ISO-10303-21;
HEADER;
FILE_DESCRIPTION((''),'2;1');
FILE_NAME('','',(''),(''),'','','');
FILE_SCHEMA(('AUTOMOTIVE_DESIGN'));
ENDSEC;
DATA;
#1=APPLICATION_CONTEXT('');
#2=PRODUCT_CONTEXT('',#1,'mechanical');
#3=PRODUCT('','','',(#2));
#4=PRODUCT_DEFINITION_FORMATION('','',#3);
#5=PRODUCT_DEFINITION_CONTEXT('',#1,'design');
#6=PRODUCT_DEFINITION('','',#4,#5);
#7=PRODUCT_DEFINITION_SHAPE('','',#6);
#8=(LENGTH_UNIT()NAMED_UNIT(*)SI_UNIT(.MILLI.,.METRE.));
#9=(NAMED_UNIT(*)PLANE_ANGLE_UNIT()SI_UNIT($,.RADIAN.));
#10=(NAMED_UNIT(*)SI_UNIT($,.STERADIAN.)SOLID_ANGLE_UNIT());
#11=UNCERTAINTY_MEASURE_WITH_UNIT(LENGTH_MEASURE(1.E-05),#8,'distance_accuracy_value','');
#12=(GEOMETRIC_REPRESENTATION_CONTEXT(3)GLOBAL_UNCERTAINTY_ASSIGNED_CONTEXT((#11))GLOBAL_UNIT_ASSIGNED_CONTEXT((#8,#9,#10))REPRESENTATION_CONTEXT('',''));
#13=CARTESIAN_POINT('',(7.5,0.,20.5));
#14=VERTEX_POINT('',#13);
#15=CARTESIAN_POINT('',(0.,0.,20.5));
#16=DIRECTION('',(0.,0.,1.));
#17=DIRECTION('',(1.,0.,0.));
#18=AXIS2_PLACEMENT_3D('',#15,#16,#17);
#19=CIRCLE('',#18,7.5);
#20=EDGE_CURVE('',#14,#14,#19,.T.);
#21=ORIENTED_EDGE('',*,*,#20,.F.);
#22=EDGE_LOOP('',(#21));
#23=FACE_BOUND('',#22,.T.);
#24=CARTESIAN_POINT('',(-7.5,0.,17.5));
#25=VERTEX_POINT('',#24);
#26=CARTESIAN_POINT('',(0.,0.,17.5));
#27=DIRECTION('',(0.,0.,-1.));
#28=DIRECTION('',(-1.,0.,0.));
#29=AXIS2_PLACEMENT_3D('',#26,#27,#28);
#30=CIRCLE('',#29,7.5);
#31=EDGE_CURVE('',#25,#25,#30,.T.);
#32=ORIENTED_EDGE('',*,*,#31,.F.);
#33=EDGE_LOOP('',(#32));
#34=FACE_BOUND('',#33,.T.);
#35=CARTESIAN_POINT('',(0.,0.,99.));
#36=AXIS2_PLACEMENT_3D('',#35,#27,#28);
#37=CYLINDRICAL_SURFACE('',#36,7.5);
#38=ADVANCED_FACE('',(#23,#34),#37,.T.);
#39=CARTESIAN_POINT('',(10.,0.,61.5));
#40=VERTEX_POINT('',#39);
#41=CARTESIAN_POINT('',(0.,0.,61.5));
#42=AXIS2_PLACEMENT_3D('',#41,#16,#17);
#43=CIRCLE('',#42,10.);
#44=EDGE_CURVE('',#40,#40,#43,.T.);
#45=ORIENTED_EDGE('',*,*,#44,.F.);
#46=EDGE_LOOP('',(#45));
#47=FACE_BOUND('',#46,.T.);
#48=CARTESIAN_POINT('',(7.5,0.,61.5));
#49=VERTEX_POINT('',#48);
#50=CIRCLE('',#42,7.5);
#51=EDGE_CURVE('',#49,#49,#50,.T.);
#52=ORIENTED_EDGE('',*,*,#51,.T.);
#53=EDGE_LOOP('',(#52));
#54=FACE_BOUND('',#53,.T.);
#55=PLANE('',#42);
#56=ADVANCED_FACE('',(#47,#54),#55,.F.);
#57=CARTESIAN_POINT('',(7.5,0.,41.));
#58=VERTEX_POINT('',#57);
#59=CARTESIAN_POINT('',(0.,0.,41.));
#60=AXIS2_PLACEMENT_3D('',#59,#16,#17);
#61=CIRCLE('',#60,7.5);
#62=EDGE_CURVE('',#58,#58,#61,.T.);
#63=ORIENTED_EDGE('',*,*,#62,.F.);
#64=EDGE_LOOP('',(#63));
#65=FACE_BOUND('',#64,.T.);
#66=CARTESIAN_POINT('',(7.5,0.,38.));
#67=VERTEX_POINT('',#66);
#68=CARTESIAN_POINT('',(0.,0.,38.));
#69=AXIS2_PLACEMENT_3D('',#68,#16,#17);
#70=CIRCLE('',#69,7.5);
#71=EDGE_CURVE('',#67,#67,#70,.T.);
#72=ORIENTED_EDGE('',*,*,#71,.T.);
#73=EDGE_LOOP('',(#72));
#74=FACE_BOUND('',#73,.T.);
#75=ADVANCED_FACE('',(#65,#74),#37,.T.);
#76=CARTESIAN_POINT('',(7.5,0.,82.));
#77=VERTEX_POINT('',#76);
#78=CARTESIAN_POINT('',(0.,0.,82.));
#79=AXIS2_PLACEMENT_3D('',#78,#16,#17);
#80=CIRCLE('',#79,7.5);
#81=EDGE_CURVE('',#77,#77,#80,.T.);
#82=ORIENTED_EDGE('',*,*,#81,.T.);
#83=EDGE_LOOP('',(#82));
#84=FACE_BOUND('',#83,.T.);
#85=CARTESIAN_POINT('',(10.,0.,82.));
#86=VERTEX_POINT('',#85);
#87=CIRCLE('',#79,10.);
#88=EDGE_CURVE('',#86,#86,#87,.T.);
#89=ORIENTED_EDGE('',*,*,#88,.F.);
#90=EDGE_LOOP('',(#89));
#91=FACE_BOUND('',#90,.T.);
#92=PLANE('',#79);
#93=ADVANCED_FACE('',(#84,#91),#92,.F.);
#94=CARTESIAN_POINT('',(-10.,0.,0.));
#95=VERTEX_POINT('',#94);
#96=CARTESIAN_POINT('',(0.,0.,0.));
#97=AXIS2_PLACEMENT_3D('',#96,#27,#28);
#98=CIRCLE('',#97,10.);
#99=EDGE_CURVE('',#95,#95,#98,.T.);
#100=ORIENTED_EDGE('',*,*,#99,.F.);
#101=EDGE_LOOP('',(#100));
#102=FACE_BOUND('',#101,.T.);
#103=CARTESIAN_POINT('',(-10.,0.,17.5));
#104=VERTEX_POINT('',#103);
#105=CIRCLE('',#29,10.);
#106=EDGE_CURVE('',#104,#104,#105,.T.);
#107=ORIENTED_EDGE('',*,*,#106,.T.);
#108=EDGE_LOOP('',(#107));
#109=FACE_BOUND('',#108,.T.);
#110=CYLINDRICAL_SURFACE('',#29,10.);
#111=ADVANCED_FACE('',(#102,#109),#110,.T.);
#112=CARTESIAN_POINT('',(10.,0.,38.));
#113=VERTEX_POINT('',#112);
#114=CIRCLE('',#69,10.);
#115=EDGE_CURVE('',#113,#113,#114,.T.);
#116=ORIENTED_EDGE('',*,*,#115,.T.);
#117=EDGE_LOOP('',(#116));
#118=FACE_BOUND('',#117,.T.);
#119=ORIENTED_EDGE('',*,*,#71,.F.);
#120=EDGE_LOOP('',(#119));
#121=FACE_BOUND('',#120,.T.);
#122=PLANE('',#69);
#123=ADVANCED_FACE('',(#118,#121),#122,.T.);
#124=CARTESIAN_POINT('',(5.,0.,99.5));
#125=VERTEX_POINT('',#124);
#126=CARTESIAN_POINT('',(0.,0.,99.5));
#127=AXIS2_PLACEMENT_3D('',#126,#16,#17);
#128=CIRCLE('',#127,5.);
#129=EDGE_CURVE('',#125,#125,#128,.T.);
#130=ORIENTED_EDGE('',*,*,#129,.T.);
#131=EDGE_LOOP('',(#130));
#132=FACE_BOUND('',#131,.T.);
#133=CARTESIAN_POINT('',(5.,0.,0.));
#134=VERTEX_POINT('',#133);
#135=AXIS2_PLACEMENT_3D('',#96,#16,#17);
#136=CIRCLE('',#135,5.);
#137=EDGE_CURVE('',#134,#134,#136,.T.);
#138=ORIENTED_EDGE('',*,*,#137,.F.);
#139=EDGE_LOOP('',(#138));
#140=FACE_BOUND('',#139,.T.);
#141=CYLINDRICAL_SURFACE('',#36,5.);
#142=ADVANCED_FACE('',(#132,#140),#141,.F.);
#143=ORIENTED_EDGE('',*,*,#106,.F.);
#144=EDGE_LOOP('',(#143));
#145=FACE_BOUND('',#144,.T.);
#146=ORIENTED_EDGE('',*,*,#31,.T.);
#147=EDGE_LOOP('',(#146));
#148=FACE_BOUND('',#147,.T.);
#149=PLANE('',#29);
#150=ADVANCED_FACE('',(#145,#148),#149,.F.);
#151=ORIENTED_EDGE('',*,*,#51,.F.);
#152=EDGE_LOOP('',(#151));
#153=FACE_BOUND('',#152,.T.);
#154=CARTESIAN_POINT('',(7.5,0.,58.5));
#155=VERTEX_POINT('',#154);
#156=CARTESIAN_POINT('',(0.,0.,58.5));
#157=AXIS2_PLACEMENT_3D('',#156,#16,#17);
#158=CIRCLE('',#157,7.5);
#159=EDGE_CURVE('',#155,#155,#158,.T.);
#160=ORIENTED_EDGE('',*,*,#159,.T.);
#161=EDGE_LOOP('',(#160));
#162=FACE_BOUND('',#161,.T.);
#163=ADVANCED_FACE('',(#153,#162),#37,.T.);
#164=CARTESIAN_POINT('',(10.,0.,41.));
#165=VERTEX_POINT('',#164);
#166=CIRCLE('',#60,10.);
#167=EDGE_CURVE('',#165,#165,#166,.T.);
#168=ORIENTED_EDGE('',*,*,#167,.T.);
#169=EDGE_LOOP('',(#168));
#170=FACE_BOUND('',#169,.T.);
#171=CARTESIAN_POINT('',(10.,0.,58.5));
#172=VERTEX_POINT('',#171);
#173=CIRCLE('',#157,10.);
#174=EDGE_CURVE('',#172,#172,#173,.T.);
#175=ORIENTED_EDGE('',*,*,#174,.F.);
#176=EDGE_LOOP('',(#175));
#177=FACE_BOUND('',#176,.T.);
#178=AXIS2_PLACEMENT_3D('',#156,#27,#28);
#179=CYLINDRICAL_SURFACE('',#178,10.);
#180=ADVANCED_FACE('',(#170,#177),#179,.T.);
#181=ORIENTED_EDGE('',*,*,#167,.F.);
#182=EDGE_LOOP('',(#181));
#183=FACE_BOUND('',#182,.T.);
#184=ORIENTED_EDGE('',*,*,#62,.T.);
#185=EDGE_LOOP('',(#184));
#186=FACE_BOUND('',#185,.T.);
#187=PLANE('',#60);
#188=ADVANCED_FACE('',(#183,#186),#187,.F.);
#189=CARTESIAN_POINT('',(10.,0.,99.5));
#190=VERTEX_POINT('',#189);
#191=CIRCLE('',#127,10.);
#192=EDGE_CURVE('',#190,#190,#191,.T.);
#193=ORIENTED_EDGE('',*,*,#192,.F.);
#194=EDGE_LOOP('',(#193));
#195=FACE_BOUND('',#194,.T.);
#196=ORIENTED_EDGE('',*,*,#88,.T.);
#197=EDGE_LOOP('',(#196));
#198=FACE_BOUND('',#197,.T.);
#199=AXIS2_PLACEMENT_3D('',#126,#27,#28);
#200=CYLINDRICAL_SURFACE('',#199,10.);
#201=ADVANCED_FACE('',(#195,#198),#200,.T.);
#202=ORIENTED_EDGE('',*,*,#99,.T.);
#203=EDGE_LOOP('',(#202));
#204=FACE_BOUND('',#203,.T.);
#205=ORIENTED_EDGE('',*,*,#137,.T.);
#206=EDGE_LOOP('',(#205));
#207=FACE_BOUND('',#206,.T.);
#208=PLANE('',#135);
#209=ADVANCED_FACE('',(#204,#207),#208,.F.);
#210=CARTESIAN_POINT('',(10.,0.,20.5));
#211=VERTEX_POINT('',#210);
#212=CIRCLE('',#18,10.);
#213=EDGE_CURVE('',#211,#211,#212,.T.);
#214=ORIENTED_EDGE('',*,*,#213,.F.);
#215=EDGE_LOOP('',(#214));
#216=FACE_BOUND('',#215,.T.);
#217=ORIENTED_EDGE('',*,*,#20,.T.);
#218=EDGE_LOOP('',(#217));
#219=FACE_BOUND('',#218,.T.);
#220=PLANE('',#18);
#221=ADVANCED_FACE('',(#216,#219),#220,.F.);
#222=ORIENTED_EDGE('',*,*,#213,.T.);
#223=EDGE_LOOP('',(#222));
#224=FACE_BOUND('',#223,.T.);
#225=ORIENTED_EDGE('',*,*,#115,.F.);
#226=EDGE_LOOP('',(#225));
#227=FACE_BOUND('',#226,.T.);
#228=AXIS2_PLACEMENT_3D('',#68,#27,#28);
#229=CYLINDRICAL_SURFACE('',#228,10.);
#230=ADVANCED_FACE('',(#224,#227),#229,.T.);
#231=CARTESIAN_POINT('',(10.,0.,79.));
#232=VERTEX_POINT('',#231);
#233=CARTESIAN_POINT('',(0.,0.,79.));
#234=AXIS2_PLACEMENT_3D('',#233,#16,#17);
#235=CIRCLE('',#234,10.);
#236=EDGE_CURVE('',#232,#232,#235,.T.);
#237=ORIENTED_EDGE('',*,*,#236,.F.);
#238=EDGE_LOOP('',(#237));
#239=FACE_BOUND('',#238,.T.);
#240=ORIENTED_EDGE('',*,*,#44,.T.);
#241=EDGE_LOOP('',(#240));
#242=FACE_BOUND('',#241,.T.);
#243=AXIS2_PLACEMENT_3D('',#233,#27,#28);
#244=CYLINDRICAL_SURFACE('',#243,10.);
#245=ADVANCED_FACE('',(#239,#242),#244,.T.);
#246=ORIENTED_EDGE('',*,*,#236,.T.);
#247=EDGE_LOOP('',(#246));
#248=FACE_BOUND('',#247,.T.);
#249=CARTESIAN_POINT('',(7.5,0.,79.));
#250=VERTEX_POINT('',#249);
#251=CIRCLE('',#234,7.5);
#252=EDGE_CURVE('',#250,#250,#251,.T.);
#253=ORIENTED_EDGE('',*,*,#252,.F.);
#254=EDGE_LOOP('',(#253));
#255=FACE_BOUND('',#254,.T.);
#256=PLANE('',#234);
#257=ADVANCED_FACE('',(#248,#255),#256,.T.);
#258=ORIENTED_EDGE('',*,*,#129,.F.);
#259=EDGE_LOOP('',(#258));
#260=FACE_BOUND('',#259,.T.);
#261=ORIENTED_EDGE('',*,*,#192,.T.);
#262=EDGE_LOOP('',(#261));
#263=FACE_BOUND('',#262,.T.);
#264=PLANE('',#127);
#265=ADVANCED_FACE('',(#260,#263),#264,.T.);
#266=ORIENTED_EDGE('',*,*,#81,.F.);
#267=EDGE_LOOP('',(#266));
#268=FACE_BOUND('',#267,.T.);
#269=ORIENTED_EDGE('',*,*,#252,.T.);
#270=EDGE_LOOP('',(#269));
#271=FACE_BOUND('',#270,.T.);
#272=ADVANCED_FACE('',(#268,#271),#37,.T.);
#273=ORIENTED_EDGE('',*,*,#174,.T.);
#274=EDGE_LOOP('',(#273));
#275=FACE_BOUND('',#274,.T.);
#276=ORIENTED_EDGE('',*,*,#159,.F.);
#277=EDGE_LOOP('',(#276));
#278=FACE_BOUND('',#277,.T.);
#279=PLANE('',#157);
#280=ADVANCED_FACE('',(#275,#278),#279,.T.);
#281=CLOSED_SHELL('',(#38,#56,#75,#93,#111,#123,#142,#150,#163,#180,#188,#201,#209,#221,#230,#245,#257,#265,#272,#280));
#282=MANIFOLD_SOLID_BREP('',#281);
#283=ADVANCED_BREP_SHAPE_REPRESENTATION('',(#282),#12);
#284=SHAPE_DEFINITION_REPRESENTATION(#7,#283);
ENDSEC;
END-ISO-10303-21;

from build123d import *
from build123d.topology import SkipClean

# Parameters (mm, degrees)
SKETCH1_R           = 7.5
SKETCH1_R_2         = 5
BOSS_EXTRUDE1_DEPTH = 99
SKETCH2_R           = 10
BOSS_EXTRUDE2_DEPTH = 17.5
SKETCH3_R           = 10
SKETCH3_R_2         = 7.5
BOSS_EXTRUDE3_DEPTH = 17.5
SKETCH4_R           = 10
SKETCH4_R_2         = 7.5
BOSS_EXTRUDE4_DEPTH = 17.5
SKETCH5_R           = 10
SKETCH5_R_2         = 7.5
BOSS_EXTRUDE5_DEPTH = 17.5
SKETCH6_R           = 10
SKETCH6_R_2         = 7.5
BOSS_EXTRUDE6_DEPTH = 17.5
SKETCH9_R           = 7.5
SKETCH9_R_2         = 5
BOSS_EXTRUDE7_DEPTH = 0.5
SKETCH10_R          = 5
CUT_EXTRUDE1_DEPTH  = 84.210576251


with BuildPart() as part:
    # Sketch1 → Boss-Extrude1 (new body)
    with BuildSketch(Plane.XY):
        Circle(SKETCH1_R)
        Circle(SKETCH1_R_2, mode=Mode.SUBTRACT)
    extrude(amount=BOSS_EXTRUDE1_DEPTH)

    # Sketch2 → Boss-Extrude2 (add)
    with BuildSketch(Plane(origin=(0, 0, 0), x_dir=(-1, 0, 0), z_dir=(0, 0, -1))):
        Circle(SKETCH2_R)
    extrude(amount=-BOSS_EXTRUDE2_DEPTH)

    # Sketch3 → Boss-Extrude3 (add)
    with BuildSketch(Plane.XY.offset(20.5)):
        Circle(SKETCH3_R)
        Circle(SKETCH3_R_2, mode=Mode.SUBTRACT)
    extrude(amount=BOSS_EXTRUDE3_DEPTH)

    # Sketch4 → Boss-Extrude4 (add)
    with BuildSketch(Plane.XY.offset(41)):
        Circle(SKETCH4_R)
        Circle(SKETCH4_R_2, mode=Mode.SUBTRACT)
    extrude(amount=BOSS_EXTRUDE4_DEPTH)

    # Sketch5 → Boss-Extrude5 (add)
    with BuildSketch(Plane.XY.offset(61.5)):
        Circle(SKETCH5_R)
        Circle(SKETCH5_R_2, mode=Mode.SUBTRACT)
    extrude(amount=BOSS_EXTRUDE5_DEPTH)

    # Sketch6 → Boss-Extrude6 (add)
    with BuildSketch(Plane.XY.offset(82)):
        Circle(SKETCH6_R)
        Circle(SKETCH6_R_2, mode=Mode.SUBTRACT)
    extrude(amount=BOSS_EXTRUDE6_DEPTH)

    # Sketch9 → Boss-Extrude7 (add)
    with BuildSketch(Plane.XY.offset(99)):
        Circle(SKETCH9_R)
        with Locations(Location((0, 0, 0), (0, 0, 180))):
            Circle(SKETCH9_R_2, mode=Mode.SUBTRACT)
    extrude(amount=BOSS_EXTRUDE7_DEPTH)

    # Sketch10 → Cut-Extrude1 (cut, through all)
    with SkipClean():  # the faces are left unmerged after this step: merging them gives an invalid solid
        with BuildSketch(Plane.XY.offset(17.5)):
            Circle(SKETCH10_R)
        extrude(amount=-CUT_EXTRUDE1_DEPTH, mode=Mode.SUBTRACT)
    add(part.part.scale(1), mode=Mode.REPLACE)  # the faces are merged on a copy


solid = part.part
